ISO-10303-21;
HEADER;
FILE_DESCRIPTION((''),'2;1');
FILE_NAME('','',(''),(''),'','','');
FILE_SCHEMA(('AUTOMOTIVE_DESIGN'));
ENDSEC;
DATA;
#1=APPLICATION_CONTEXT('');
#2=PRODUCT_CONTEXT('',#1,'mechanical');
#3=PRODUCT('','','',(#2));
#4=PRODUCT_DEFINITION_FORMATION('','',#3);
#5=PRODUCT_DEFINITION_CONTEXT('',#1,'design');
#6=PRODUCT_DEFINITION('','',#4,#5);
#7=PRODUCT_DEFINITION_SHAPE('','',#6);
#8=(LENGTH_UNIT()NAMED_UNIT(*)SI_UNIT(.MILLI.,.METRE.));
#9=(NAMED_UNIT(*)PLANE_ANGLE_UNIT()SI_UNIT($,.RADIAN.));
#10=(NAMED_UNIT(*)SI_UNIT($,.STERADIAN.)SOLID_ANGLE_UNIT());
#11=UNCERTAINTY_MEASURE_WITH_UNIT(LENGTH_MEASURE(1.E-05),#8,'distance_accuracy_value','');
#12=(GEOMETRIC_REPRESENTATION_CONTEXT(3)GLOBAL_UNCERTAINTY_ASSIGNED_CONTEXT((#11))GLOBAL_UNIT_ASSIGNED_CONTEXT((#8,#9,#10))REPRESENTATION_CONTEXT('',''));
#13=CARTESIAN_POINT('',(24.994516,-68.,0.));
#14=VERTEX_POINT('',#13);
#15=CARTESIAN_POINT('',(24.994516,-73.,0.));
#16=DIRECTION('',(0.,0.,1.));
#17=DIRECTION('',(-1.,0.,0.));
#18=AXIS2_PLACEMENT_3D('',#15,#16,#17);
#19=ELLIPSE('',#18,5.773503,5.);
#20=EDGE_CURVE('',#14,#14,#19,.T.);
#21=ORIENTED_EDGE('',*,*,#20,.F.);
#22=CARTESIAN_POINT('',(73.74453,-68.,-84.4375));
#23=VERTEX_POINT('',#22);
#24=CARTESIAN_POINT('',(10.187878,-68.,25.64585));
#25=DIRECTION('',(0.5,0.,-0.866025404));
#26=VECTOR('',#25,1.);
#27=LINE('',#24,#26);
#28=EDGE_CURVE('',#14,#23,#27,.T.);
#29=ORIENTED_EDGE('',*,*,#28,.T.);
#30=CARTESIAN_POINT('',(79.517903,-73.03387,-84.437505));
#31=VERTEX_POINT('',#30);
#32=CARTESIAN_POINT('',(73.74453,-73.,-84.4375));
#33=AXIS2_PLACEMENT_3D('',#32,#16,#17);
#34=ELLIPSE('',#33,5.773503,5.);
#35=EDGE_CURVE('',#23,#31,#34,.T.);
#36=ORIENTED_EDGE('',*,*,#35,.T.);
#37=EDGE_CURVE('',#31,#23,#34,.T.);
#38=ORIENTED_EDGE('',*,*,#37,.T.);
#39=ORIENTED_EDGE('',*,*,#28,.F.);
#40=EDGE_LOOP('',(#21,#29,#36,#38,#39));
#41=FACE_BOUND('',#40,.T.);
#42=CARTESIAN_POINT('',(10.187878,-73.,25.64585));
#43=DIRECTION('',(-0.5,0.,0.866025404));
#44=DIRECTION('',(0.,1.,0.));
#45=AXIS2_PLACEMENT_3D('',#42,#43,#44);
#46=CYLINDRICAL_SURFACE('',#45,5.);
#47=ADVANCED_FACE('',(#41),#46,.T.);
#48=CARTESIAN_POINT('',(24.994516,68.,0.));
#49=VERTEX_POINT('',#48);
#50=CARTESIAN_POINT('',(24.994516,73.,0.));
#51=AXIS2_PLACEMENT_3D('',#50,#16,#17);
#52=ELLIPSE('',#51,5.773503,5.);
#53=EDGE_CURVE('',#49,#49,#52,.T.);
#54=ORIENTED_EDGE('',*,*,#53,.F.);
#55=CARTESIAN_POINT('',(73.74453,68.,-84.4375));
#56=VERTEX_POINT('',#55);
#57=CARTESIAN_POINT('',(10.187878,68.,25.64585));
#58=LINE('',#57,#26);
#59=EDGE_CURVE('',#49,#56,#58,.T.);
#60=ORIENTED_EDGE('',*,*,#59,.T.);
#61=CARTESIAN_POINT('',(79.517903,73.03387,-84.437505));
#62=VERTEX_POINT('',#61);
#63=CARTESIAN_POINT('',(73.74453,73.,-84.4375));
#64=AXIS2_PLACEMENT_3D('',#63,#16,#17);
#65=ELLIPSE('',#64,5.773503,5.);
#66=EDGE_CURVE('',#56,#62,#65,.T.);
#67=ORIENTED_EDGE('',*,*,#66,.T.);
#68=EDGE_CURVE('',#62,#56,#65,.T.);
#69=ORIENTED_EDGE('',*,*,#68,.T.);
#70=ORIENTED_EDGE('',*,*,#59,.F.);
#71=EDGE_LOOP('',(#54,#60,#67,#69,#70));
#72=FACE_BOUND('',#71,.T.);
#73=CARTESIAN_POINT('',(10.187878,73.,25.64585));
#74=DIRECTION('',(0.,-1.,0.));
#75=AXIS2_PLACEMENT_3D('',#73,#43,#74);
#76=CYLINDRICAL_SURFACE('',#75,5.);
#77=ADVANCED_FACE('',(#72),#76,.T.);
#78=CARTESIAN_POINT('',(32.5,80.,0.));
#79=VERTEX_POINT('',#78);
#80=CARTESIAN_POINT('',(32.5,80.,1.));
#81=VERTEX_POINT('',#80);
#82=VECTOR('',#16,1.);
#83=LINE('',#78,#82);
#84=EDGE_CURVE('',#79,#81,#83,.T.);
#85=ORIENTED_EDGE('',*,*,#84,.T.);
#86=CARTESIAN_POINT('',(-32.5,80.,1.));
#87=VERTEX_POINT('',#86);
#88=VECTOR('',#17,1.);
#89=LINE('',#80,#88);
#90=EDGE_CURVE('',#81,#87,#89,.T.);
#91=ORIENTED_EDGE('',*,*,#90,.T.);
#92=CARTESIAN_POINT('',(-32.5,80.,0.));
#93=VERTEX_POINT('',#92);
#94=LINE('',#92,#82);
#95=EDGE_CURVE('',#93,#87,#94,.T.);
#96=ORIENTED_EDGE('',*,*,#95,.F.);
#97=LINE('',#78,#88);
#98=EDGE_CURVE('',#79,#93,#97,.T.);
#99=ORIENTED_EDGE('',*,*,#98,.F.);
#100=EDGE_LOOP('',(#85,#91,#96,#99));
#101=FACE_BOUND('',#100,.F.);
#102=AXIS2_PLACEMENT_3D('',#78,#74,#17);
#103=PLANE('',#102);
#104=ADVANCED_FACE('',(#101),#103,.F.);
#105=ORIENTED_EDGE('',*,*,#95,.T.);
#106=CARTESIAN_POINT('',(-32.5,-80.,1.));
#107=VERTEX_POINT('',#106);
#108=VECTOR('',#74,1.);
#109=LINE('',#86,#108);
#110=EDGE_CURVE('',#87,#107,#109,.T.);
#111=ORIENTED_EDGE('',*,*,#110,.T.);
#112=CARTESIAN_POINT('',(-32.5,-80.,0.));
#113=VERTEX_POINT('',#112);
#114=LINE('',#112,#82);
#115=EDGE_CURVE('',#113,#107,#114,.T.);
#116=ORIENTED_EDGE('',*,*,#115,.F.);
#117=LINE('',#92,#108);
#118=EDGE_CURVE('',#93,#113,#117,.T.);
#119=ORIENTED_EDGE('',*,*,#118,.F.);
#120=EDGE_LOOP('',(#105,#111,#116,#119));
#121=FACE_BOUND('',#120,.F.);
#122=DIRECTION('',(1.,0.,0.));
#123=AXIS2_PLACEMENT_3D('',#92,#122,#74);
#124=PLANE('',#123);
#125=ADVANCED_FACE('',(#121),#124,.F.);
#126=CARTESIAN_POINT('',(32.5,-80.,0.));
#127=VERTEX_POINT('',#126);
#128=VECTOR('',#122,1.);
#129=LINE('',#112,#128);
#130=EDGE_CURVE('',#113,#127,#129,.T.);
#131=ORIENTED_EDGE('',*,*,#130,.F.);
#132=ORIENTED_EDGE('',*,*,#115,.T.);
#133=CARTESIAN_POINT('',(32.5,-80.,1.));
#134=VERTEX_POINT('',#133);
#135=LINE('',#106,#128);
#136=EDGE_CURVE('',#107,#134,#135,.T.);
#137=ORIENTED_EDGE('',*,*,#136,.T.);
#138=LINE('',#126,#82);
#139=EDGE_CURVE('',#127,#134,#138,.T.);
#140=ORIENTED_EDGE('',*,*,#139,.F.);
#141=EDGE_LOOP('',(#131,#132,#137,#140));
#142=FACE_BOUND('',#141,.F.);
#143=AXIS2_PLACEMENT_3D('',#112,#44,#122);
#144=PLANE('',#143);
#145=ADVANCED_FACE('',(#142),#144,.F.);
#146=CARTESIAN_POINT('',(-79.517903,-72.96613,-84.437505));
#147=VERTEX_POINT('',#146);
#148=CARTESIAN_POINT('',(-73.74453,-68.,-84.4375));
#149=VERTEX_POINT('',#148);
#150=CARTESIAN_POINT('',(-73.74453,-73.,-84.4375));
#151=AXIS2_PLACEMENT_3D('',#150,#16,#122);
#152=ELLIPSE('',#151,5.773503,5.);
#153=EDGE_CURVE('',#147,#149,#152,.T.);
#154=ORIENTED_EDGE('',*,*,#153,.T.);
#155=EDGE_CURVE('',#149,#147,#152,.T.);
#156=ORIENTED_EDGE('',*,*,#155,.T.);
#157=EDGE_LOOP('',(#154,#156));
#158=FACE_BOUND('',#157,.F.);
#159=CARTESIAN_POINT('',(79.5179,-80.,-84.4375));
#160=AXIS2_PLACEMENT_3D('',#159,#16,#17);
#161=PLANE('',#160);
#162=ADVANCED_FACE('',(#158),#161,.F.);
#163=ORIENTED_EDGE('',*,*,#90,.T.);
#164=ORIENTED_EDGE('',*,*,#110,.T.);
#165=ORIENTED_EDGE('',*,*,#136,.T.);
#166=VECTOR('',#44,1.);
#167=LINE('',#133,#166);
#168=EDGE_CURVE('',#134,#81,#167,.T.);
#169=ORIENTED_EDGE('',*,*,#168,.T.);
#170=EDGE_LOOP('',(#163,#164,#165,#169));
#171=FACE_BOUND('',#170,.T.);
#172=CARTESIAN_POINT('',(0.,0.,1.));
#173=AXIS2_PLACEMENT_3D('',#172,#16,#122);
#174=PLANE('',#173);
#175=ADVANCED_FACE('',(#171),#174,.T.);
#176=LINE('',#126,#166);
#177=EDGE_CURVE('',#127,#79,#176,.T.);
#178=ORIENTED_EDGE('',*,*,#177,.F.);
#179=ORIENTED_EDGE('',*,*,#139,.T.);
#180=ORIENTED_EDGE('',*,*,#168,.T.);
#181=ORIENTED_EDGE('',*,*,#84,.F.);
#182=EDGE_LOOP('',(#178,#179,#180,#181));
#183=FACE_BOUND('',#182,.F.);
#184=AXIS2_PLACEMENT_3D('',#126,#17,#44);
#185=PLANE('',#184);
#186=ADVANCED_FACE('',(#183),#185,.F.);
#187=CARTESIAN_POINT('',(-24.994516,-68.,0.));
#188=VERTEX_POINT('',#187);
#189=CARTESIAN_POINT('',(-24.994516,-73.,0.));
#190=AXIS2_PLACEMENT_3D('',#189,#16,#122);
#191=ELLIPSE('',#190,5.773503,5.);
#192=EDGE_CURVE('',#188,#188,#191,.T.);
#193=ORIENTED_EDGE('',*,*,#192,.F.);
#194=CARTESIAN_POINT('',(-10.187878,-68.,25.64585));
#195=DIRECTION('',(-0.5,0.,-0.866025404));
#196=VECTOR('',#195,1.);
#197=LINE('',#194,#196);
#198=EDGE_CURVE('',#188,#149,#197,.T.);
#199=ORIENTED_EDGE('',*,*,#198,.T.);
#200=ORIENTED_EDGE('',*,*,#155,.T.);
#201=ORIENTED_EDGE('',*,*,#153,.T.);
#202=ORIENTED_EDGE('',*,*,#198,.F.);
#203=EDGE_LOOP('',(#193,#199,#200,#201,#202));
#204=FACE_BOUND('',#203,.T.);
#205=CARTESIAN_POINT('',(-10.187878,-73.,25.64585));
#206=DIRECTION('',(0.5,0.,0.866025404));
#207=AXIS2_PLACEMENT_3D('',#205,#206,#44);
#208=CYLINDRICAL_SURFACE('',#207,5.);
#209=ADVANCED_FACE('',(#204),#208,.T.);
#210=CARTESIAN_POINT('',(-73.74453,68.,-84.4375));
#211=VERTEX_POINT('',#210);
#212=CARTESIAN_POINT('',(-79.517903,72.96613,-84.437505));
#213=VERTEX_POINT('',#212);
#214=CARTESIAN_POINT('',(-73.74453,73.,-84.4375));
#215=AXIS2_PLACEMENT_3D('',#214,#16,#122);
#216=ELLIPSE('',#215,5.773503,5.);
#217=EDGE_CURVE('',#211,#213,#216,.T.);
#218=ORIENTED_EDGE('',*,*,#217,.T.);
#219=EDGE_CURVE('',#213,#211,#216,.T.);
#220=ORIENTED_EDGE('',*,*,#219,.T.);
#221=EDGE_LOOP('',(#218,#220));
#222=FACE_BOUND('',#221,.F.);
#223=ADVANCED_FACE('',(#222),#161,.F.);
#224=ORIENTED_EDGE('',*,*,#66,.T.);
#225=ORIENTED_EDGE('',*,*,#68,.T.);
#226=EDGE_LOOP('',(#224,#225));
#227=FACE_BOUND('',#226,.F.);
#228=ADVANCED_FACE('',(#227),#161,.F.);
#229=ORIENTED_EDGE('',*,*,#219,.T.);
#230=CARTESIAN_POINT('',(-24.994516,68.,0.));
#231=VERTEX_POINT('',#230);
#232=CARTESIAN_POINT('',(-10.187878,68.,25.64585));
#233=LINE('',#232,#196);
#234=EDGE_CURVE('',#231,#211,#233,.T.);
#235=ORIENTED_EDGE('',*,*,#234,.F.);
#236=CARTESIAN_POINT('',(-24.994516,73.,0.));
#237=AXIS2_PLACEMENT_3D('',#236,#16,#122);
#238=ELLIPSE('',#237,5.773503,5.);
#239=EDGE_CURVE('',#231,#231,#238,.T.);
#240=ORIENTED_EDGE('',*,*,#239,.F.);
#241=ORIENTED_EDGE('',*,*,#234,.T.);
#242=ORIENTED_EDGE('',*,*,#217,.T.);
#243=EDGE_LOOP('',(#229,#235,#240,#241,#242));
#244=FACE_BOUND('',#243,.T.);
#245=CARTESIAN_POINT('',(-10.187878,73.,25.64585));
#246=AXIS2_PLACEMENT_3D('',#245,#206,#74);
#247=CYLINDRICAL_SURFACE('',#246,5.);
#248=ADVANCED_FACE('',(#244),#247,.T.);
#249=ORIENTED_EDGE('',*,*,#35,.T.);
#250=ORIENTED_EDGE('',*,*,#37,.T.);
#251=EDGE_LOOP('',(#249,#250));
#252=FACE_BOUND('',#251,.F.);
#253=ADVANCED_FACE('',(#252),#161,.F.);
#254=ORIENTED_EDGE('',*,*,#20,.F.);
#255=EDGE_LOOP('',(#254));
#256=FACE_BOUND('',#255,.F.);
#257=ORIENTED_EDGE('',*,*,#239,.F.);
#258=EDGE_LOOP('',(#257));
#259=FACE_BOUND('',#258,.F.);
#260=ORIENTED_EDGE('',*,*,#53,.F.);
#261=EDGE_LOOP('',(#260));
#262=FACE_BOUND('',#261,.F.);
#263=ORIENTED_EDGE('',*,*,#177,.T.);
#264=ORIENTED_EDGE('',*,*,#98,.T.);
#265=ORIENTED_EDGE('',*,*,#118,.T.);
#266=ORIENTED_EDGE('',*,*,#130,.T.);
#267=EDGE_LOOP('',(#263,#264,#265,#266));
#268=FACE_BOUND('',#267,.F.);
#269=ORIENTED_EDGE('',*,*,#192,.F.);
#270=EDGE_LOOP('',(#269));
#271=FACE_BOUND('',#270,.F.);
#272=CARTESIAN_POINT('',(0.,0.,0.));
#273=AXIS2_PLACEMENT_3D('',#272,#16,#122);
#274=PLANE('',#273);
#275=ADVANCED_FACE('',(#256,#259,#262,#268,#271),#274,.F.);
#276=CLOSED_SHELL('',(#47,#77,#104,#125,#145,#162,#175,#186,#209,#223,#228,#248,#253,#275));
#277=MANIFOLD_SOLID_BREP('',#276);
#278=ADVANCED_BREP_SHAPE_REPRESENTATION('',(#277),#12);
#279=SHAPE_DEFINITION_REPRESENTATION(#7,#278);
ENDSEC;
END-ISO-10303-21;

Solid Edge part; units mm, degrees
sketch "Sketch1" plane through (0, 0, 0) normal (0, 0, 1) x (1, 0, 0)
  line L0 (32.5, 80) -> (-32.5, 80)
  line L1 (-32.5, 80) -> (-32.5, -80)
  line L2 (-32.5, -80) -> (32.5, -80)
  line L3 (32.5, -80) -> (32.5, 80)
  dimension "D1" = 65
  dimension "D2" = 160
extrude "Protrusion1" add sketch "Sketch1" along normal blind 1
sketch "Sketch2" plane through (5.2285, 0, 16.7452) normal (0.5, 0, 0.8660254) x (0, 1, 0)
  circle A0 centre (-73, 17.8013) radius 5
  dimension "D1" = 10
  dimension "D2" = 7
extrude "ProtrusioneEstrusa_4" add sketch "Sketch2" against normal blind 130
mirror "Mirror1" about plane through (0, 0, 0) normal (1, 0, 0) of "ProtrusioneEstrusa_4"
mirror "Mirror2" about plane through (0, 0, 0) normal (0, -1, 0) of "Mirror1", "ProtrusioneEstrusa_4"
sketch "Sketch3" plane through (0, -80, 1.5) normal (0, -1, 0) x (1, 0, 0)
  line L0 (32.5, 26.6458) -> (-32.5, 26.6458)
  line L1 (-32.5, 26.6458) -> (-32.5, -0.5)
  line L2 (-32.5, -0.5) -> (32.5, -0.5)
  line L3 (32.5, -0.5) -> (32.5, 26.6458)
extrude "Cutout1" cut sketch "Sketch3" against normal through all
sketch "Sketch4" plane through (0, -80, 1.5) normal (0, -1, 0) x (1, 0, 0)
  line L0 (79.5179, -85.9375) -> (-79.5179, -85.9375)
  line L1 (-79.5179, -85.9375) -> (-79.5179, -90.9375)
  line L2 (-79.5179, -90.9375) -> (79.5179, -90.9375)
  line L3 (79.5179, -90.9375) -> (79.5179, -85.9375)
extrude "Cutout2" cut sketch "Sketch4" against normal through all
properties material "Fe 360 B UNI 7070"
